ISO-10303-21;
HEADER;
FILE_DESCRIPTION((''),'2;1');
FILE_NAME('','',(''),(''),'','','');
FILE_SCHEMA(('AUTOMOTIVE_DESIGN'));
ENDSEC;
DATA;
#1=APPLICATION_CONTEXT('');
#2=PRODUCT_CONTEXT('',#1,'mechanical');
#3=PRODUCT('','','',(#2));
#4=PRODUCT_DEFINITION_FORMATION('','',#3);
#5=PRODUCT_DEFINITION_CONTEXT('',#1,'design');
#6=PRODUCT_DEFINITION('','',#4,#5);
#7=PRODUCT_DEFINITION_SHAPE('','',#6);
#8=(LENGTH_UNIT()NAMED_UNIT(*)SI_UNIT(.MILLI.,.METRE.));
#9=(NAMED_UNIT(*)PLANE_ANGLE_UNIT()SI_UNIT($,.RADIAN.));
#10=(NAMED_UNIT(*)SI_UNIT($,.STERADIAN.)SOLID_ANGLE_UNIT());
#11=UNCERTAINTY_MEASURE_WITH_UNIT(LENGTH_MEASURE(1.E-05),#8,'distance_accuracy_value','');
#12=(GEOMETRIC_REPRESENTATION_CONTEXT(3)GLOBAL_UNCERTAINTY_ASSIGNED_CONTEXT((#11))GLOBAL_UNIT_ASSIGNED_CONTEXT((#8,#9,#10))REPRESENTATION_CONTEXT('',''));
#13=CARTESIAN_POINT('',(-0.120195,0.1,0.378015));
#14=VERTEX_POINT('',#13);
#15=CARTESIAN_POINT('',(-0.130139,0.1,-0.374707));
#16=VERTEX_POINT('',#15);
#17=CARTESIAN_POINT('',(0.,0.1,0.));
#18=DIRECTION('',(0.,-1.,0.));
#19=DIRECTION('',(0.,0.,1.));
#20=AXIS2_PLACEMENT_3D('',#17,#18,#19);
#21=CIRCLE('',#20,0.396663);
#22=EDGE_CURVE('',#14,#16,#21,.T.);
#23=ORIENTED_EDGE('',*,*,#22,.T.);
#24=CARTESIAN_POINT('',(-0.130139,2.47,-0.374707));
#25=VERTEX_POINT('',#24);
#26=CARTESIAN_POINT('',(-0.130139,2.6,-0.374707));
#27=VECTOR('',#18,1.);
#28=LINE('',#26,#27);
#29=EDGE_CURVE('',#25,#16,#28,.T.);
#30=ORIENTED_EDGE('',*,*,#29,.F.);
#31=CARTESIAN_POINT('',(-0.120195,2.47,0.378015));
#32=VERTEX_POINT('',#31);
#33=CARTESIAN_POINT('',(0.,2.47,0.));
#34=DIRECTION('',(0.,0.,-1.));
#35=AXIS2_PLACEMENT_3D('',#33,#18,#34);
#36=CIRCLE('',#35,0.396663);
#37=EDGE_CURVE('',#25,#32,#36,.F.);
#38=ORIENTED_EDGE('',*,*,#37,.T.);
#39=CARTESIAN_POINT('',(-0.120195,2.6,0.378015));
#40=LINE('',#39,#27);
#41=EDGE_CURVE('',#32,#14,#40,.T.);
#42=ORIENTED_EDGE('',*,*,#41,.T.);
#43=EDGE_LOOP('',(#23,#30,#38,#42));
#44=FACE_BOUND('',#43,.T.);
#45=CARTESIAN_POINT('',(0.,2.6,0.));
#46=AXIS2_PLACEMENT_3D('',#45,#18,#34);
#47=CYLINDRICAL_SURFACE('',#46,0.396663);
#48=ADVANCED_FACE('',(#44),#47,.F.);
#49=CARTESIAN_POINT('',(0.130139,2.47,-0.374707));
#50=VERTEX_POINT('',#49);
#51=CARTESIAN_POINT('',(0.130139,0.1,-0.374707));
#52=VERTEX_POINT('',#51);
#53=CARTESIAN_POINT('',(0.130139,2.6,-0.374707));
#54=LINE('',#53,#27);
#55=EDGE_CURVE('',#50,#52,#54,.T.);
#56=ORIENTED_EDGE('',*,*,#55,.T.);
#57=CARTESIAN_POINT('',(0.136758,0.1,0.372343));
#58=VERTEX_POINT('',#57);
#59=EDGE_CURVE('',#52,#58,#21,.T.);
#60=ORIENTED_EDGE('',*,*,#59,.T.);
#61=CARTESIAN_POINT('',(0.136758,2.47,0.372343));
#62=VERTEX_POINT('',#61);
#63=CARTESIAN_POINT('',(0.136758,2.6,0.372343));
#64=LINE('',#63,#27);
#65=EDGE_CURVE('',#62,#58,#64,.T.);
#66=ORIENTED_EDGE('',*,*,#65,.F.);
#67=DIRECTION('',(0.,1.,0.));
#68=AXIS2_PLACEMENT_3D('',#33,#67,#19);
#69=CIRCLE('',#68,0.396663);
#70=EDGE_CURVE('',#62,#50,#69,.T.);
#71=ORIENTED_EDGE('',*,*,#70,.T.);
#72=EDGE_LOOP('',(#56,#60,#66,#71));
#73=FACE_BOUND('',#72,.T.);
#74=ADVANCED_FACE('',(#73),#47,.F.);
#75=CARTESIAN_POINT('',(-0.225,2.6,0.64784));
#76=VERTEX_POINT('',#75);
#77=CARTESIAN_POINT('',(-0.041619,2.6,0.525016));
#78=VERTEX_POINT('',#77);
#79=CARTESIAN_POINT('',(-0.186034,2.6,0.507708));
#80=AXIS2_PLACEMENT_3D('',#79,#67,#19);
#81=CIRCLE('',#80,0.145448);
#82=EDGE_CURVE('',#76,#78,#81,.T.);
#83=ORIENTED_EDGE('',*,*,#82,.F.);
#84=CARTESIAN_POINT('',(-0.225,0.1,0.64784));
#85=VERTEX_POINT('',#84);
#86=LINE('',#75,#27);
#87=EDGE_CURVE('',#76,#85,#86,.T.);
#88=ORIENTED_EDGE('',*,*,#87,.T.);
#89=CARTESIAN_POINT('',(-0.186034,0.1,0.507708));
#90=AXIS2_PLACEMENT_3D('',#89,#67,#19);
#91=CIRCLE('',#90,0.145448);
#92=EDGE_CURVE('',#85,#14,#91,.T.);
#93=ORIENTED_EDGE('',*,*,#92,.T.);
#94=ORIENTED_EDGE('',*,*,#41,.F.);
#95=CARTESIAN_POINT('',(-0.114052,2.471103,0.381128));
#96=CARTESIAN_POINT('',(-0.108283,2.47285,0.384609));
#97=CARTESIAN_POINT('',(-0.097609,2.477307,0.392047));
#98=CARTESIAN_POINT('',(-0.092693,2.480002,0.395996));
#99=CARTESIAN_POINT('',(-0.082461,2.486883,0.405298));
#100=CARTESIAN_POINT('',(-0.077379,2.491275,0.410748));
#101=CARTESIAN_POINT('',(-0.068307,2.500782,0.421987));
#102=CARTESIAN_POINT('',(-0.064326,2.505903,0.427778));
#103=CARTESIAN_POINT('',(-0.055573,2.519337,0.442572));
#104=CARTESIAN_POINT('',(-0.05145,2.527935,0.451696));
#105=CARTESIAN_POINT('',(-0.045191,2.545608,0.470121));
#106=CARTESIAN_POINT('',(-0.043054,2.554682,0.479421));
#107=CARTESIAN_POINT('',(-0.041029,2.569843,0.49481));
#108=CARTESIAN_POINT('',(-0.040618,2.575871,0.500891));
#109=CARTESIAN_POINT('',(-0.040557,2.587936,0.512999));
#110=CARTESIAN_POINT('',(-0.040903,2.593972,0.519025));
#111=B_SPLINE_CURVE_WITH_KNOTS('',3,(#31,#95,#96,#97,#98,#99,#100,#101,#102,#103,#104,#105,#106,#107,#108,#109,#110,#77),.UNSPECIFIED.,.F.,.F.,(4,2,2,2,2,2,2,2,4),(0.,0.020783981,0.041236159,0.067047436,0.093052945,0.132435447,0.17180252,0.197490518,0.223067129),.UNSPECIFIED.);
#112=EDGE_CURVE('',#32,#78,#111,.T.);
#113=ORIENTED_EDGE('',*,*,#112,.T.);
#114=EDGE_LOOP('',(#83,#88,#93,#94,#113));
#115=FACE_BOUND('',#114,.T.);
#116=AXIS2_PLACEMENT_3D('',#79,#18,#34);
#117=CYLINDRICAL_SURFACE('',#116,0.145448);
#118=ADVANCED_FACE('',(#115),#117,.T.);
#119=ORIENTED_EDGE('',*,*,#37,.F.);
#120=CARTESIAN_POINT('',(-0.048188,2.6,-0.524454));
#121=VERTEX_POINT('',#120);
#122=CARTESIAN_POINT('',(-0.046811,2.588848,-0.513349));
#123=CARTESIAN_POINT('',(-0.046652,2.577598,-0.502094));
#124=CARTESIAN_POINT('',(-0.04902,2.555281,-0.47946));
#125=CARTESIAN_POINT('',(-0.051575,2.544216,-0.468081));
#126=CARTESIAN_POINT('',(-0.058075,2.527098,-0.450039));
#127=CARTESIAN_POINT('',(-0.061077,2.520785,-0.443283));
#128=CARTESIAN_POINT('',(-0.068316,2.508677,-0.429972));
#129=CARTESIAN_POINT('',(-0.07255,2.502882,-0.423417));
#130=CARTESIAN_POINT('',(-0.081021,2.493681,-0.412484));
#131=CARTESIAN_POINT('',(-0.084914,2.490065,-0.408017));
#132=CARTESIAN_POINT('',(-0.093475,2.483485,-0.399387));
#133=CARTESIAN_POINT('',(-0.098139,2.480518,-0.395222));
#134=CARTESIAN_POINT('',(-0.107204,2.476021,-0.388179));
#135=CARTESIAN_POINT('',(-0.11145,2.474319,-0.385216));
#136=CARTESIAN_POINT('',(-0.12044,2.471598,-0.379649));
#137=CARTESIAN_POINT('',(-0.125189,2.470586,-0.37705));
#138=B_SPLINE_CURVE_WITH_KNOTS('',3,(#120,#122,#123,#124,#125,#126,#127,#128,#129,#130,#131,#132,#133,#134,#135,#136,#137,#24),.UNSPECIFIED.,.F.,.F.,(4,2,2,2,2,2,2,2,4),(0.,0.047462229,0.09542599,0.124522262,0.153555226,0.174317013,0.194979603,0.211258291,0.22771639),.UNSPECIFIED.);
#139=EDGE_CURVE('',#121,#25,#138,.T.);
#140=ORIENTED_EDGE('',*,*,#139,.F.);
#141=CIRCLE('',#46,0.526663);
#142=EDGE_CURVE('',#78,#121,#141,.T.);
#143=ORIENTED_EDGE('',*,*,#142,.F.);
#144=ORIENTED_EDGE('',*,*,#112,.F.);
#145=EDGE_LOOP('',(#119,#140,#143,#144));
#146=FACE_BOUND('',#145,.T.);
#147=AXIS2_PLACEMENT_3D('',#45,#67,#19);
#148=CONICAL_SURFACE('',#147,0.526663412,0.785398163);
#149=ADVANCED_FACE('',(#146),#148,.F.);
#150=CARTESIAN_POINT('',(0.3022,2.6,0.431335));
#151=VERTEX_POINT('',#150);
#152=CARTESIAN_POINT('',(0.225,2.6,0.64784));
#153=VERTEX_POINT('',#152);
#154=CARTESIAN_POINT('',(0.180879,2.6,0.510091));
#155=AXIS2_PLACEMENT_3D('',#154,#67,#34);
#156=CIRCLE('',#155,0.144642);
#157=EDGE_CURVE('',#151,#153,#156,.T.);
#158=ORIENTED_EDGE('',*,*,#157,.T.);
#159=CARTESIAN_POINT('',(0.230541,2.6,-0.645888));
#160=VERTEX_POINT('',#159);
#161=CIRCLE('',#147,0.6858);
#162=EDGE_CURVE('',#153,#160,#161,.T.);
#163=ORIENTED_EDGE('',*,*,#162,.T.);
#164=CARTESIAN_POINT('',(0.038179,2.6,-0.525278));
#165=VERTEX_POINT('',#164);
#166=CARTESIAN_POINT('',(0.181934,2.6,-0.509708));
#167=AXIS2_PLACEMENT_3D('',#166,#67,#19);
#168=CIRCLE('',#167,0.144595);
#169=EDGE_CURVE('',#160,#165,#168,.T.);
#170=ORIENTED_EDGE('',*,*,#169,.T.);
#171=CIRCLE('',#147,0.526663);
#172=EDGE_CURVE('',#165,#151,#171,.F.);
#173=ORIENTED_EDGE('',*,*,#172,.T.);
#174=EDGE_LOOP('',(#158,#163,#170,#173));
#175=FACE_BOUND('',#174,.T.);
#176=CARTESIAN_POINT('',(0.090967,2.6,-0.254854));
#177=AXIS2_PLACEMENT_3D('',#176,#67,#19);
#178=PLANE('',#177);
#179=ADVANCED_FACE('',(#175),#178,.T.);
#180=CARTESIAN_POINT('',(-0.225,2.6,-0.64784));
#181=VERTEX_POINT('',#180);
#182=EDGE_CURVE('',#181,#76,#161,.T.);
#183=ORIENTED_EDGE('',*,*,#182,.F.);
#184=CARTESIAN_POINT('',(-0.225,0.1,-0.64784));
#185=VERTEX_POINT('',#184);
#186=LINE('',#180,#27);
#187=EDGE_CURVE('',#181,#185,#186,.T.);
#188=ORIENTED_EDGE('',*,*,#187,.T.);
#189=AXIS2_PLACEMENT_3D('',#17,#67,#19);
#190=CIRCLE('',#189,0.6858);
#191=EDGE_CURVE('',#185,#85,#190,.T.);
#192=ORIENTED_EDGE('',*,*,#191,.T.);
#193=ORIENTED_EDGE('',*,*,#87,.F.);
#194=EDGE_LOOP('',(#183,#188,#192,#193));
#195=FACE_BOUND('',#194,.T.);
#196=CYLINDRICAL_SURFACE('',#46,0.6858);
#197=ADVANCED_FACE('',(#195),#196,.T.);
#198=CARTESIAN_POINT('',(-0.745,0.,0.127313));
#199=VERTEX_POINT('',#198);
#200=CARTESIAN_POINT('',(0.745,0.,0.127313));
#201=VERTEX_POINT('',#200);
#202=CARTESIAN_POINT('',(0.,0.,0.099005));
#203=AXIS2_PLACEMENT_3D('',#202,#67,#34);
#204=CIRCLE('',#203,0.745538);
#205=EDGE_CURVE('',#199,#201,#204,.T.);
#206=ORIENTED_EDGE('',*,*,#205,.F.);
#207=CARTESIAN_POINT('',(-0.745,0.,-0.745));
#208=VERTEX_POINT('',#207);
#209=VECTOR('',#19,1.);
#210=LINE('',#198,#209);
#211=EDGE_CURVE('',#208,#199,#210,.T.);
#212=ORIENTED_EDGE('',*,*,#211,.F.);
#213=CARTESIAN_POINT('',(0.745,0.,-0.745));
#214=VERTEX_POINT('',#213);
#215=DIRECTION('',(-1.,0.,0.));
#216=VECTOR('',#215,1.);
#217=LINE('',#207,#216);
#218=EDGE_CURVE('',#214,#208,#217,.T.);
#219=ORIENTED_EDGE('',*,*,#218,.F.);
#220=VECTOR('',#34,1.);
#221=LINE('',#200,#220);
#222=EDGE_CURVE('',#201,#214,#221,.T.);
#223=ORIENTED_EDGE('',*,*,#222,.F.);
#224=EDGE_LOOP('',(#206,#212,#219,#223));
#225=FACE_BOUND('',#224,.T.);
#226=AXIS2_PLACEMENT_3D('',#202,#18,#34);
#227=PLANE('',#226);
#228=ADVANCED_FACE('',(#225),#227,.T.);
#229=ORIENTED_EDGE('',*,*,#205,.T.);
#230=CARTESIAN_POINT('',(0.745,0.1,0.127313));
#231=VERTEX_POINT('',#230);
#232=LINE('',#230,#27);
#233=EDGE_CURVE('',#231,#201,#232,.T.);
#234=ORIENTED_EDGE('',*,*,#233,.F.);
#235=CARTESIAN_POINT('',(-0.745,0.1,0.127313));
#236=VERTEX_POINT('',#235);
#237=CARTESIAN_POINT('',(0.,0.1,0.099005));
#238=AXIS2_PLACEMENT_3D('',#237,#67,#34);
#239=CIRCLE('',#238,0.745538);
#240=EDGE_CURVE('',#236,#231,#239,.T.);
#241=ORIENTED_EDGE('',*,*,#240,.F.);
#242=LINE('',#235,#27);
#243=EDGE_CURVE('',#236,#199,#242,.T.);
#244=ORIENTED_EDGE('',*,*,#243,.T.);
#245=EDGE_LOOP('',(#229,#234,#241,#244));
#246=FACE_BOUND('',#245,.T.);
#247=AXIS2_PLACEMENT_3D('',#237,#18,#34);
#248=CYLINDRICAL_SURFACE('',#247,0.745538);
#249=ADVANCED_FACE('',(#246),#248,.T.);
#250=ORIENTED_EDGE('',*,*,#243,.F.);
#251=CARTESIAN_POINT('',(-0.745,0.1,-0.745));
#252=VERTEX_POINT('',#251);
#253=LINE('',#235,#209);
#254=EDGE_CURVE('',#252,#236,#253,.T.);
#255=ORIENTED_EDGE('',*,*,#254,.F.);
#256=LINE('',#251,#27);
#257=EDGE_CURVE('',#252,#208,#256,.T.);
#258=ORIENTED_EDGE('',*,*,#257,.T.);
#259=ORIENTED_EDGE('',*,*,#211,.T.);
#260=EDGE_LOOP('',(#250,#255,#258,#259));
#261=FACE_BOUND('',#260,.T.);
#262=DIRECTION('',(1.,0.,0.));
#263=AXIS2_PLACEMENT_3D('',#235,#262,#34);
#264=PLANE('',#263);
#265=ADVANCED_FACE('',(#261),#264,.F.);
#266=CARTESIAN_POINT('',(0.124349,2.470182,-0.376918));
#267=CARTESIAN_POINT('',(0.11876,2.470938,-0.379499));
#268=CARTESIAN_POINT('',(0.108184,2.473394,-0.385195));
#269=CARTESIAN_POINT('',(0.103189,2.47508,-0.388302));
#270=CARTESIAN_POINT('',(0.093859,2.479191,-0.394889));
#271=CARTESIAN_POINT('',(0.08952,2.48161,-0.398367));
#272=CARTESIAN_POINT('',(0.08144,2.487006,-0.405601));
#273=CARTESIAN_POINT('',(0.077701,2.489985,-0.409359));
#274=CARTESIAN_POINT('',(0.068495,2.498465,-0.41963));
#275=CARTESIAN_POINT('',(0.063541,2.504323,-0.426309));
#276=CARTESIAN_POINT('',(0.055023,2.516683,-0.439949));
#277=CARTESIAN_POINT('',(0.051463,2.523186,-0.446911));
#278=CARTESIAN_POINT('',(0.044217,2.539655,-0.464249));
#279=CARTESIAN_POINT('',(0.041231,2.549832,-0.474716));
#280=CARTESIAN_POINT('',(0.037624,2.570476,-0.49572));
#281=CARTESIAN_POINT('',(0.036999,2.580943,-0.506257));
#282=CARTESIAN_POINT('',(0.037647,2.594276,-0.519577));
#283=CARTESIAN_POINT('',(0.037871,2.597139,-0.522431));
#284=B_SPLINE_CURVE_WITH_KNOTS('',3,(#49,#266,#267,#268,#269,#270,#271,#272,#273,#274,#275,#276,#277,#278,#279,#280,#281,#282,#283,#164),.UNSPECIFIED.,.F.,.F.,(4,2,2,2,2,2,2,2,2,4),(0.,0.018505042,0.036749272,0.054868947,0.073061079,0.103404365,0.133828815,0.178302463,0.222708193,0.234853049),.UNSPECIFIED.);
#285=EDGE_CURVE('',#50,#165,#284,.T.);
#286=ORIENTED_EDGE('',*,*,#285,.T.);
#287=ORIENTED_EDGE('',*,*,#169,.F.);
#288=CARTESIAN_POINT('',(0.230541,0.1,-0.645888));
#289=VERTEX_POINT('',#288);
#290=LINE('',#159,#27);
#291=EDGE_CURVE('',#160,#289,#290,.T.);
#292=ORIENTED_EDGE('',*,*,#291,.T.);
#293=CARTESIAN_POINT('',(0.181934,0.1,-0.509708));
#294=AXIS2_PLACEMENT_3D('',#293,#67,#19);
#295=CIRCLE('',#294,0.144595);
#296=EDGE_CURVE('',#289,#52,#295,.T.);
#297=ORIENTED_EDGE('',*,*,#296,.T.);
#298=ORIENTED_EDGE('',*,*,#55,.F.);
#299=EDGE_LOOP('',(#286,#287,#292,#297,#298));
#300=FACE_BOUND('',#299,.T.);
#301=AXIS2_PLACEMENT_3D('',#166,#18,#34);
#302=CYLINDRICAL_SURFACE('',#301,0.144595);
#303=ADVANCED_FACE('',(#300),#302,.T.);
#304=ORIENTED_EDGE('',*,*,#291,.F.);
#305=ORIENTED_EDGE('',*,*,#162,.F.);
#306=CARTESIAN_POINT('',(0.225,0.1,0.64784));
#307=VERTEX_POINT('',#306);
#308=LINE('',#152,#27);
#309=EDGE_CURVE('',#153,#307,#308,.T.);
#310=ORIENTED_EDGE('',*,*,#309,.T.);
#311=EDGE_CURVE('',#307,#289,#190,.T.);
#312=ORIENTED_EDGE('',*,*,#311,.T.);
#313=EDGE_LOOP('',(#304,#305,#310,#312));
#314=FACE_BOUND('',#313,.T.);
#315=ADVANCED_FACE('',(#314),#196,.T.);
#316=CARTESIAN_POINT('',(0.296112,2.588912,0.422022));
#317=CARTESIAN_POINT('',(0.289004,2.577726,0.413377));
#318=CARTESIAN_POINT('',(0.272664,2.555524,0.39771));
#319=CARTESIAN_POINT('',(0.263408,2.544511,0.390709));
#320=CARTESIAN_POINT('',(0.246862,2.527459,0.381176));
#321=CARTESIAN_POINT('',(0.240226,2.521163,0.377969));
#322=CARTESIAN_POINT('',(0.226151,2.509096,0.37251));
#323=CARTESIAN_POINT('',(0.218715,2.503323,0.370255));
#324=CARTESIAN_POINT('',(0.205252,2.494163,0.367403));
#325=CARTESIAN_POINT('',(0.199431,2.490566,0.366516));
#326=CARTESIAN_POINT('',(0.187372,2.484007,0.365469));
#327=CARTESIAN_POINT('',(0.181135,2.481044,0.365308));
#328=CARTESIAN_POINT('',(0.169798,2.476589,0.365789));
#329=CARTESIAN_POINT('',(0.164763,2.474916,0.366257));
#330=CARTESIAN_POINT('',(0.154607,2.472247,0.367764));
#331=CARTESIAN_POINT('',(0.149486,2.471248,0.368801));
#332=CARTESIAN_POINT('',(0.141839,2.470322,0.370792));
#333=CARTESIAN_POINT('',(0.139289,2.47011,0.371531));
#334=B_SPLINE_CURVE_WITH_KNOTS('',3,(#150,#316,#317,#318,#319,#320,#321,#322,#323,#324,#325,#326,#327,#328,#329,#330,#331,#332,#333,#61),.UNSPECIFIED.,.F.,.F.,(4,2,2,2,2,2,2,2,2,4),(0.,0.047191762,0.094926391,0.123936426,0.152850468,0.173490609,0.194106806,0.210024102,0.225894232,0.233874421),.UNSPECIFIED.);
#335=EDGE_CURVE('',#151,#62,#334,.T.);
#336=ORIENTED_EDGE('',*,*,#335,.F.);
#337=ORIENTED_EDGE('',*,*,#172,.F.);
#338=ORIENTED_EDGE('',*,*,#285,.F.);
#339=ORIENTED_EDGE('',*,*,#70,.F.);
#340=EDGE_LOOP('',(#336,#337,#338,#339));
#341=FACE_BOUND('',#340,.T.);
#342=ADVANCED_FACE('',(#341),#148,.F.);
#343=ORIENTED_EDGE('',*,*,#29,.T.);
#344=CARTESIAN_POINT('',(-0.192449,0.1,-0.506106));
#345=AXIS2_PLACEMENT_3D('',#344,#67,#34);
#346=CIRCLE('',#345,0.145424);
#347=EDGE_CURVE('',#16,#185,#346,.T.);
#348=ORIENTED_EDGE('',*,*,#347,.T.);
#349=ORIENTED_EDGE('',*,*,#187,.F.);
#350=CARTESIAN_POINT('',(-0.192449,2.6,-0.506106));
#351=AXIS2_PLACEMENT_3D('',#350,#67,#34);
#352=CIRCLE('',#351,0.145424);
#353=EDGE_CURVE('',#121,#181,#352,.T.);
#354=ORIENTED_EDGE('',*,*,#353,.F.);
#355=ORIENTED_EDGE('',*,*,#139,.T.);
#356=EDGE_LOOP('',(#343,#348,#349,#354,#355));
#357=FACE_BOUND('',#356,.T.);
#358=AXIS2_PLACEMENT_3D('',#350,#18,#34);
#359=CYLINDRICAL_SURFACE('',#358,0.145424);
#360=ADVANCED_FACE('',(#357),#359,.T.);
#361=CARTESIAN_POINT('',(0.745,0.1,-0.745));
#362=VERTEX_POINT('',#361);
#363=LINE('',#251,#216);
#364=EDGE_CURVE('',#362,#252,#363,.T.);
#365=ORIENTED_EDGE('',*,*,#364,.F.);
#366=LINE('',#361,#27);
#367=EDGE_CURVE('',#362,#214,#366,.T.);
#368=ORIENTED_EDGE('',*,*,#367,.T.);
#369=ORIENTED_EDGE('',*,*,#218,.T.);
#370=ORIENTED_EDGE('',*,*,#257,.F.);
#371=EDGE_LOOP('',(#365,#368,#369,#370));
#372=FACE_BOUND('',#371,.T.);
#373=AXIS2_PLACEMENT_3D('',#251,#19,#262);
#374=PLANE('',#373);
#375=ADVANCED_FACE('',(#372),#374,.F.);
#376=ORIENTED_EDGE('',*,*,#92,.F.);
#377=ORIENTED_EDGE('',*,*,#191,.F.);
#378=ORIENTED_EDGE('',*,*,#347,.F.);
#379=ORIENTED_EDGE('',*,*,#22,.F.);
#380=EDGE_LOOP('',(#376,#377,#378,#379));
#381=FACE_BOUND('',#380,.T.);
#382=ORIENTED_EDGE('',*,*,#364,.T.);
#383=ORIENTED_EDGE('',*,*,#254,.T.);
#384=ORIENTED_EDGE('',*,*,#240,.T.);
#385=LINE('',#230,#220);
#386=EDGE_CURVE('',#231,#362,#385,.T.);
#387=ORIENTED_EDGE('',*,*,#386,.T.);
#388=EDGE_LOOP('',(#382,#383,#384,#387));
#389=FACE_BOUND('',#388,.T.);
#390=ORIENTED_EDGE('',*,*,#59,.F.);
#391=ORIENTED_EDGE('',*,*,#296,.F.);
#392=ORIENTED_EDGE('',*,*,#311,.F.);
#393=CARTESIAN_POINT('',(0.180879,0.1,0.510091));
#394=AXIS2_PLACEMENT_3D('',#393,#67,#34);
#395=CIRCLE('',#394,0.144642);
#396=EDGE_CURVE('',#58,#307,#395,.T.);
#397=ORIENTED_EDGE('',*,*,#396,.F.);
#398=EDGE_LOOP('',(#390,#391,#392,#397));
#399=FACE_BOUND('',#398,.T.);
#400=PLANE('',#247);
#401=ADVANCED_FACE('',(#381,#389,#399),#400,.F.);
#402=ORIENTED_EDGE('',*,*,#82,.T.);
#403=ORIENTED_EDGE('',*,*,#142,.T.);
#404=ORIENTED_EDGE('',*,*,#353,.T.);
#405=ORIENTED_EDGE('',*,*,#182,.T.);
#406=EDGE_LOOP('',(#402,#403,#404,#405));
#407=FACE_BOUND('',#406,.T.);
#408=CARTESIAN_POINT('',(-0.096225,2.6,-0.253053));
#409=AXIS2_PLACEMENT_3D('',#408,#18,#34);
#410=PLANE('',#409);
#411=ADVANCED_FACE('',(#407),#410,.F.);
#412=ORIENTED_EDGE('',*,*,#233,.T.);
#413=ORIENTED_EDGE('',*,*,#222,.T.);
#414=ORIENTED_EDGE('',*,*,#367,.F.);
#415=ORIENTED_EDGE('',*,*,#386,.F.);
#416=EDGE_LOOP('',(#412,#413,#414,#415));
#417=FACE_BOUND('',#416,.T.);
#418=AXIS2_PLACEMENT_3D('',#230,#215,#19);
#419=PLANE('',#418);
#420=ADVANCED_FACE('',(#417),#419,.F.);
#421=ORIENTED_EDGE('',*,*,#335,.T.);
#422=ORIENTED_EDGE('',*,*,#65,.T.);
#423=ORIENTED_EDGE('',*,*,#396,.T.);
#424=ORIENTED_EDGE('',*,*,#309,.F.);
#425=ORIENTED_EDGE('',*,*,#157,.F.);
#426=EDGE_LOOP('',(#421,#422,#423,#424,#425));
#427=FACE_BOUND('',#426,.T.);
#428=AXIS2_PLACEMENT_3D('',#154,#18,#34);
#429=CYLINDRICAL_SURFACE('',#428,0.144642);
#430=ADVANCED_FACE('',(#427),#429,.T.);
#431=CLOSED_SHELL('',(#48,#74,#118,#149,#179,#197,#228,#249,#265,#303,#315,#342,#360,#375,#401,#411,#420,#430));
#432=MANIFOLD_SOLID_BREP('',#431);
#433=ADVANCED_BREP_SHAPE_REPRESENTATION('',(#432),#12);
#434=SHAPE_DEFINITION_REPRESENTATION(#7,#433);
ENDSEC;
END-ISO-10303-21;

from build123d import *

# Parameters (mm, degrees)
RESSALTO_EXTRUS_O2_DEPTH = 0.1
RESSALTO_EXTRUS_O4_DEPTH = 2.5
CHANFRO4_SIZE            = 0.13
CHANFRO6_SIZE            = 0.13


with BuildPart() as part:
    # Esboço1 → Ressalto-extrusão2 (new body)
    with BuildSketch(Plane(origin=(0, 0, 0), x_dir=(1, 0, 0), z_dir=(0, 1, 0))):
        with BuildLine():
            Line((-0.745, -0.127313197), (-0.745, 0.745))
            Line((-0.745, 0.745), (0.745, 0.745))
            Line((0.745, 0.745), (0.745, -0.127313197))
            ThreePointArc((0.745, -0.127313197), (0, -0.84454219), (-0.745, -0.127313197))
        make_face()
    extrude(amount=RESSALTO_EXTRUS_O2_DEPTH)

    # Esboço2 → Ressalto-extrusão4 (add)
    with BuildSketch(Plane(origin=(0, 0.1, 0), x_dir=(1, 0, 0), z_dir=(0, 1, 0))):
        with BuildLine():
            ThreePointArc((-0.130138985, 0.374707495), (-0.396628803, -0.005239731), (-0.120195023, -0.378014575))
            ThreePointArc((-0.120195023, -0.378014575), (-0.050453859, -0.560369913), (-0.225, -0.64783959))
            ThreePointArc((-0.225, -0.64783959), (-0.685799631, 0), (-0.225, 0.64783959))
            ThreePointArc((-0.225, 0.64783959), (-0.055075167, 0.553816826), (-0.130138985, 0.374707495))
        make_face()
        with BuildLine():
            ThreePointArc((0.225, -0.64783959), (0.685793341, -0.00293739), (0.230541296, 0.645888415))
            ThreePointArc((0.230541296, 0.645888415), (0.046333691, 0.559912645), (0.130138985, 0.374707495))
            ThreePointArc((0.130138985, 0.374707495), (0.396647844, 0.00351428), (0.136757813, -0.372342803))
            ThreePointArc((0.136757813, -0.372342803), (0.043130513, -0.55421229), (0.225, -0.64783959))
        make_face()
    extrude(amount=RESSALTO_EXTRUS_O4_DEPTH)

    # Chanfro4
    chanfro4_edges = [part.edges().sort_by_distance(p)[0] for p in [
        (-0.396628803, 2.6, 0.005239731),
    ]]
    chamfer(chanfro4_edges, length=CHANFRO4_SIZE)

    # Chanfro6
    # the kernel refuses this chamfer: 0.13 mm, written as the material it takes off along each edge
    with BuildSketch(Plane(origin=(0, 2.6, 0), x_dir=(-0.4876362186378299, 0, -0.8730469164212188), z_dir=(-0.8730469164212188, 0, 0.4876362186378299))) as chanfro6_piece_1_section:
        Polygon((0.396663412, CHANFRO6_SIZE), (0.396663412 + CHANFRO6_SIZE, 0), (0.396663412, 0), align=None)
    chanfro6_piece_1 = revolve(axis=Axis((0, 2.6, 0), (0, -1, 0)), revolution_arc=237.355421361, mode=Mode.PRIVATE)
    chanfro6_piece_1 = chanfro6_piece_1 - Plane(origin=(0.180878906, 2.562353294, 0.510091196), x_dir=(-0.3050366551296925, 0, -0.9523406108253964), z_dir=(0, -1, 0)) * Cylinder(0.14464194, 3, mode=Mode.PRIVATE)
    add(chanfro6_piece_1, mode=Mode.SUBTRACT)


solid = part.part
